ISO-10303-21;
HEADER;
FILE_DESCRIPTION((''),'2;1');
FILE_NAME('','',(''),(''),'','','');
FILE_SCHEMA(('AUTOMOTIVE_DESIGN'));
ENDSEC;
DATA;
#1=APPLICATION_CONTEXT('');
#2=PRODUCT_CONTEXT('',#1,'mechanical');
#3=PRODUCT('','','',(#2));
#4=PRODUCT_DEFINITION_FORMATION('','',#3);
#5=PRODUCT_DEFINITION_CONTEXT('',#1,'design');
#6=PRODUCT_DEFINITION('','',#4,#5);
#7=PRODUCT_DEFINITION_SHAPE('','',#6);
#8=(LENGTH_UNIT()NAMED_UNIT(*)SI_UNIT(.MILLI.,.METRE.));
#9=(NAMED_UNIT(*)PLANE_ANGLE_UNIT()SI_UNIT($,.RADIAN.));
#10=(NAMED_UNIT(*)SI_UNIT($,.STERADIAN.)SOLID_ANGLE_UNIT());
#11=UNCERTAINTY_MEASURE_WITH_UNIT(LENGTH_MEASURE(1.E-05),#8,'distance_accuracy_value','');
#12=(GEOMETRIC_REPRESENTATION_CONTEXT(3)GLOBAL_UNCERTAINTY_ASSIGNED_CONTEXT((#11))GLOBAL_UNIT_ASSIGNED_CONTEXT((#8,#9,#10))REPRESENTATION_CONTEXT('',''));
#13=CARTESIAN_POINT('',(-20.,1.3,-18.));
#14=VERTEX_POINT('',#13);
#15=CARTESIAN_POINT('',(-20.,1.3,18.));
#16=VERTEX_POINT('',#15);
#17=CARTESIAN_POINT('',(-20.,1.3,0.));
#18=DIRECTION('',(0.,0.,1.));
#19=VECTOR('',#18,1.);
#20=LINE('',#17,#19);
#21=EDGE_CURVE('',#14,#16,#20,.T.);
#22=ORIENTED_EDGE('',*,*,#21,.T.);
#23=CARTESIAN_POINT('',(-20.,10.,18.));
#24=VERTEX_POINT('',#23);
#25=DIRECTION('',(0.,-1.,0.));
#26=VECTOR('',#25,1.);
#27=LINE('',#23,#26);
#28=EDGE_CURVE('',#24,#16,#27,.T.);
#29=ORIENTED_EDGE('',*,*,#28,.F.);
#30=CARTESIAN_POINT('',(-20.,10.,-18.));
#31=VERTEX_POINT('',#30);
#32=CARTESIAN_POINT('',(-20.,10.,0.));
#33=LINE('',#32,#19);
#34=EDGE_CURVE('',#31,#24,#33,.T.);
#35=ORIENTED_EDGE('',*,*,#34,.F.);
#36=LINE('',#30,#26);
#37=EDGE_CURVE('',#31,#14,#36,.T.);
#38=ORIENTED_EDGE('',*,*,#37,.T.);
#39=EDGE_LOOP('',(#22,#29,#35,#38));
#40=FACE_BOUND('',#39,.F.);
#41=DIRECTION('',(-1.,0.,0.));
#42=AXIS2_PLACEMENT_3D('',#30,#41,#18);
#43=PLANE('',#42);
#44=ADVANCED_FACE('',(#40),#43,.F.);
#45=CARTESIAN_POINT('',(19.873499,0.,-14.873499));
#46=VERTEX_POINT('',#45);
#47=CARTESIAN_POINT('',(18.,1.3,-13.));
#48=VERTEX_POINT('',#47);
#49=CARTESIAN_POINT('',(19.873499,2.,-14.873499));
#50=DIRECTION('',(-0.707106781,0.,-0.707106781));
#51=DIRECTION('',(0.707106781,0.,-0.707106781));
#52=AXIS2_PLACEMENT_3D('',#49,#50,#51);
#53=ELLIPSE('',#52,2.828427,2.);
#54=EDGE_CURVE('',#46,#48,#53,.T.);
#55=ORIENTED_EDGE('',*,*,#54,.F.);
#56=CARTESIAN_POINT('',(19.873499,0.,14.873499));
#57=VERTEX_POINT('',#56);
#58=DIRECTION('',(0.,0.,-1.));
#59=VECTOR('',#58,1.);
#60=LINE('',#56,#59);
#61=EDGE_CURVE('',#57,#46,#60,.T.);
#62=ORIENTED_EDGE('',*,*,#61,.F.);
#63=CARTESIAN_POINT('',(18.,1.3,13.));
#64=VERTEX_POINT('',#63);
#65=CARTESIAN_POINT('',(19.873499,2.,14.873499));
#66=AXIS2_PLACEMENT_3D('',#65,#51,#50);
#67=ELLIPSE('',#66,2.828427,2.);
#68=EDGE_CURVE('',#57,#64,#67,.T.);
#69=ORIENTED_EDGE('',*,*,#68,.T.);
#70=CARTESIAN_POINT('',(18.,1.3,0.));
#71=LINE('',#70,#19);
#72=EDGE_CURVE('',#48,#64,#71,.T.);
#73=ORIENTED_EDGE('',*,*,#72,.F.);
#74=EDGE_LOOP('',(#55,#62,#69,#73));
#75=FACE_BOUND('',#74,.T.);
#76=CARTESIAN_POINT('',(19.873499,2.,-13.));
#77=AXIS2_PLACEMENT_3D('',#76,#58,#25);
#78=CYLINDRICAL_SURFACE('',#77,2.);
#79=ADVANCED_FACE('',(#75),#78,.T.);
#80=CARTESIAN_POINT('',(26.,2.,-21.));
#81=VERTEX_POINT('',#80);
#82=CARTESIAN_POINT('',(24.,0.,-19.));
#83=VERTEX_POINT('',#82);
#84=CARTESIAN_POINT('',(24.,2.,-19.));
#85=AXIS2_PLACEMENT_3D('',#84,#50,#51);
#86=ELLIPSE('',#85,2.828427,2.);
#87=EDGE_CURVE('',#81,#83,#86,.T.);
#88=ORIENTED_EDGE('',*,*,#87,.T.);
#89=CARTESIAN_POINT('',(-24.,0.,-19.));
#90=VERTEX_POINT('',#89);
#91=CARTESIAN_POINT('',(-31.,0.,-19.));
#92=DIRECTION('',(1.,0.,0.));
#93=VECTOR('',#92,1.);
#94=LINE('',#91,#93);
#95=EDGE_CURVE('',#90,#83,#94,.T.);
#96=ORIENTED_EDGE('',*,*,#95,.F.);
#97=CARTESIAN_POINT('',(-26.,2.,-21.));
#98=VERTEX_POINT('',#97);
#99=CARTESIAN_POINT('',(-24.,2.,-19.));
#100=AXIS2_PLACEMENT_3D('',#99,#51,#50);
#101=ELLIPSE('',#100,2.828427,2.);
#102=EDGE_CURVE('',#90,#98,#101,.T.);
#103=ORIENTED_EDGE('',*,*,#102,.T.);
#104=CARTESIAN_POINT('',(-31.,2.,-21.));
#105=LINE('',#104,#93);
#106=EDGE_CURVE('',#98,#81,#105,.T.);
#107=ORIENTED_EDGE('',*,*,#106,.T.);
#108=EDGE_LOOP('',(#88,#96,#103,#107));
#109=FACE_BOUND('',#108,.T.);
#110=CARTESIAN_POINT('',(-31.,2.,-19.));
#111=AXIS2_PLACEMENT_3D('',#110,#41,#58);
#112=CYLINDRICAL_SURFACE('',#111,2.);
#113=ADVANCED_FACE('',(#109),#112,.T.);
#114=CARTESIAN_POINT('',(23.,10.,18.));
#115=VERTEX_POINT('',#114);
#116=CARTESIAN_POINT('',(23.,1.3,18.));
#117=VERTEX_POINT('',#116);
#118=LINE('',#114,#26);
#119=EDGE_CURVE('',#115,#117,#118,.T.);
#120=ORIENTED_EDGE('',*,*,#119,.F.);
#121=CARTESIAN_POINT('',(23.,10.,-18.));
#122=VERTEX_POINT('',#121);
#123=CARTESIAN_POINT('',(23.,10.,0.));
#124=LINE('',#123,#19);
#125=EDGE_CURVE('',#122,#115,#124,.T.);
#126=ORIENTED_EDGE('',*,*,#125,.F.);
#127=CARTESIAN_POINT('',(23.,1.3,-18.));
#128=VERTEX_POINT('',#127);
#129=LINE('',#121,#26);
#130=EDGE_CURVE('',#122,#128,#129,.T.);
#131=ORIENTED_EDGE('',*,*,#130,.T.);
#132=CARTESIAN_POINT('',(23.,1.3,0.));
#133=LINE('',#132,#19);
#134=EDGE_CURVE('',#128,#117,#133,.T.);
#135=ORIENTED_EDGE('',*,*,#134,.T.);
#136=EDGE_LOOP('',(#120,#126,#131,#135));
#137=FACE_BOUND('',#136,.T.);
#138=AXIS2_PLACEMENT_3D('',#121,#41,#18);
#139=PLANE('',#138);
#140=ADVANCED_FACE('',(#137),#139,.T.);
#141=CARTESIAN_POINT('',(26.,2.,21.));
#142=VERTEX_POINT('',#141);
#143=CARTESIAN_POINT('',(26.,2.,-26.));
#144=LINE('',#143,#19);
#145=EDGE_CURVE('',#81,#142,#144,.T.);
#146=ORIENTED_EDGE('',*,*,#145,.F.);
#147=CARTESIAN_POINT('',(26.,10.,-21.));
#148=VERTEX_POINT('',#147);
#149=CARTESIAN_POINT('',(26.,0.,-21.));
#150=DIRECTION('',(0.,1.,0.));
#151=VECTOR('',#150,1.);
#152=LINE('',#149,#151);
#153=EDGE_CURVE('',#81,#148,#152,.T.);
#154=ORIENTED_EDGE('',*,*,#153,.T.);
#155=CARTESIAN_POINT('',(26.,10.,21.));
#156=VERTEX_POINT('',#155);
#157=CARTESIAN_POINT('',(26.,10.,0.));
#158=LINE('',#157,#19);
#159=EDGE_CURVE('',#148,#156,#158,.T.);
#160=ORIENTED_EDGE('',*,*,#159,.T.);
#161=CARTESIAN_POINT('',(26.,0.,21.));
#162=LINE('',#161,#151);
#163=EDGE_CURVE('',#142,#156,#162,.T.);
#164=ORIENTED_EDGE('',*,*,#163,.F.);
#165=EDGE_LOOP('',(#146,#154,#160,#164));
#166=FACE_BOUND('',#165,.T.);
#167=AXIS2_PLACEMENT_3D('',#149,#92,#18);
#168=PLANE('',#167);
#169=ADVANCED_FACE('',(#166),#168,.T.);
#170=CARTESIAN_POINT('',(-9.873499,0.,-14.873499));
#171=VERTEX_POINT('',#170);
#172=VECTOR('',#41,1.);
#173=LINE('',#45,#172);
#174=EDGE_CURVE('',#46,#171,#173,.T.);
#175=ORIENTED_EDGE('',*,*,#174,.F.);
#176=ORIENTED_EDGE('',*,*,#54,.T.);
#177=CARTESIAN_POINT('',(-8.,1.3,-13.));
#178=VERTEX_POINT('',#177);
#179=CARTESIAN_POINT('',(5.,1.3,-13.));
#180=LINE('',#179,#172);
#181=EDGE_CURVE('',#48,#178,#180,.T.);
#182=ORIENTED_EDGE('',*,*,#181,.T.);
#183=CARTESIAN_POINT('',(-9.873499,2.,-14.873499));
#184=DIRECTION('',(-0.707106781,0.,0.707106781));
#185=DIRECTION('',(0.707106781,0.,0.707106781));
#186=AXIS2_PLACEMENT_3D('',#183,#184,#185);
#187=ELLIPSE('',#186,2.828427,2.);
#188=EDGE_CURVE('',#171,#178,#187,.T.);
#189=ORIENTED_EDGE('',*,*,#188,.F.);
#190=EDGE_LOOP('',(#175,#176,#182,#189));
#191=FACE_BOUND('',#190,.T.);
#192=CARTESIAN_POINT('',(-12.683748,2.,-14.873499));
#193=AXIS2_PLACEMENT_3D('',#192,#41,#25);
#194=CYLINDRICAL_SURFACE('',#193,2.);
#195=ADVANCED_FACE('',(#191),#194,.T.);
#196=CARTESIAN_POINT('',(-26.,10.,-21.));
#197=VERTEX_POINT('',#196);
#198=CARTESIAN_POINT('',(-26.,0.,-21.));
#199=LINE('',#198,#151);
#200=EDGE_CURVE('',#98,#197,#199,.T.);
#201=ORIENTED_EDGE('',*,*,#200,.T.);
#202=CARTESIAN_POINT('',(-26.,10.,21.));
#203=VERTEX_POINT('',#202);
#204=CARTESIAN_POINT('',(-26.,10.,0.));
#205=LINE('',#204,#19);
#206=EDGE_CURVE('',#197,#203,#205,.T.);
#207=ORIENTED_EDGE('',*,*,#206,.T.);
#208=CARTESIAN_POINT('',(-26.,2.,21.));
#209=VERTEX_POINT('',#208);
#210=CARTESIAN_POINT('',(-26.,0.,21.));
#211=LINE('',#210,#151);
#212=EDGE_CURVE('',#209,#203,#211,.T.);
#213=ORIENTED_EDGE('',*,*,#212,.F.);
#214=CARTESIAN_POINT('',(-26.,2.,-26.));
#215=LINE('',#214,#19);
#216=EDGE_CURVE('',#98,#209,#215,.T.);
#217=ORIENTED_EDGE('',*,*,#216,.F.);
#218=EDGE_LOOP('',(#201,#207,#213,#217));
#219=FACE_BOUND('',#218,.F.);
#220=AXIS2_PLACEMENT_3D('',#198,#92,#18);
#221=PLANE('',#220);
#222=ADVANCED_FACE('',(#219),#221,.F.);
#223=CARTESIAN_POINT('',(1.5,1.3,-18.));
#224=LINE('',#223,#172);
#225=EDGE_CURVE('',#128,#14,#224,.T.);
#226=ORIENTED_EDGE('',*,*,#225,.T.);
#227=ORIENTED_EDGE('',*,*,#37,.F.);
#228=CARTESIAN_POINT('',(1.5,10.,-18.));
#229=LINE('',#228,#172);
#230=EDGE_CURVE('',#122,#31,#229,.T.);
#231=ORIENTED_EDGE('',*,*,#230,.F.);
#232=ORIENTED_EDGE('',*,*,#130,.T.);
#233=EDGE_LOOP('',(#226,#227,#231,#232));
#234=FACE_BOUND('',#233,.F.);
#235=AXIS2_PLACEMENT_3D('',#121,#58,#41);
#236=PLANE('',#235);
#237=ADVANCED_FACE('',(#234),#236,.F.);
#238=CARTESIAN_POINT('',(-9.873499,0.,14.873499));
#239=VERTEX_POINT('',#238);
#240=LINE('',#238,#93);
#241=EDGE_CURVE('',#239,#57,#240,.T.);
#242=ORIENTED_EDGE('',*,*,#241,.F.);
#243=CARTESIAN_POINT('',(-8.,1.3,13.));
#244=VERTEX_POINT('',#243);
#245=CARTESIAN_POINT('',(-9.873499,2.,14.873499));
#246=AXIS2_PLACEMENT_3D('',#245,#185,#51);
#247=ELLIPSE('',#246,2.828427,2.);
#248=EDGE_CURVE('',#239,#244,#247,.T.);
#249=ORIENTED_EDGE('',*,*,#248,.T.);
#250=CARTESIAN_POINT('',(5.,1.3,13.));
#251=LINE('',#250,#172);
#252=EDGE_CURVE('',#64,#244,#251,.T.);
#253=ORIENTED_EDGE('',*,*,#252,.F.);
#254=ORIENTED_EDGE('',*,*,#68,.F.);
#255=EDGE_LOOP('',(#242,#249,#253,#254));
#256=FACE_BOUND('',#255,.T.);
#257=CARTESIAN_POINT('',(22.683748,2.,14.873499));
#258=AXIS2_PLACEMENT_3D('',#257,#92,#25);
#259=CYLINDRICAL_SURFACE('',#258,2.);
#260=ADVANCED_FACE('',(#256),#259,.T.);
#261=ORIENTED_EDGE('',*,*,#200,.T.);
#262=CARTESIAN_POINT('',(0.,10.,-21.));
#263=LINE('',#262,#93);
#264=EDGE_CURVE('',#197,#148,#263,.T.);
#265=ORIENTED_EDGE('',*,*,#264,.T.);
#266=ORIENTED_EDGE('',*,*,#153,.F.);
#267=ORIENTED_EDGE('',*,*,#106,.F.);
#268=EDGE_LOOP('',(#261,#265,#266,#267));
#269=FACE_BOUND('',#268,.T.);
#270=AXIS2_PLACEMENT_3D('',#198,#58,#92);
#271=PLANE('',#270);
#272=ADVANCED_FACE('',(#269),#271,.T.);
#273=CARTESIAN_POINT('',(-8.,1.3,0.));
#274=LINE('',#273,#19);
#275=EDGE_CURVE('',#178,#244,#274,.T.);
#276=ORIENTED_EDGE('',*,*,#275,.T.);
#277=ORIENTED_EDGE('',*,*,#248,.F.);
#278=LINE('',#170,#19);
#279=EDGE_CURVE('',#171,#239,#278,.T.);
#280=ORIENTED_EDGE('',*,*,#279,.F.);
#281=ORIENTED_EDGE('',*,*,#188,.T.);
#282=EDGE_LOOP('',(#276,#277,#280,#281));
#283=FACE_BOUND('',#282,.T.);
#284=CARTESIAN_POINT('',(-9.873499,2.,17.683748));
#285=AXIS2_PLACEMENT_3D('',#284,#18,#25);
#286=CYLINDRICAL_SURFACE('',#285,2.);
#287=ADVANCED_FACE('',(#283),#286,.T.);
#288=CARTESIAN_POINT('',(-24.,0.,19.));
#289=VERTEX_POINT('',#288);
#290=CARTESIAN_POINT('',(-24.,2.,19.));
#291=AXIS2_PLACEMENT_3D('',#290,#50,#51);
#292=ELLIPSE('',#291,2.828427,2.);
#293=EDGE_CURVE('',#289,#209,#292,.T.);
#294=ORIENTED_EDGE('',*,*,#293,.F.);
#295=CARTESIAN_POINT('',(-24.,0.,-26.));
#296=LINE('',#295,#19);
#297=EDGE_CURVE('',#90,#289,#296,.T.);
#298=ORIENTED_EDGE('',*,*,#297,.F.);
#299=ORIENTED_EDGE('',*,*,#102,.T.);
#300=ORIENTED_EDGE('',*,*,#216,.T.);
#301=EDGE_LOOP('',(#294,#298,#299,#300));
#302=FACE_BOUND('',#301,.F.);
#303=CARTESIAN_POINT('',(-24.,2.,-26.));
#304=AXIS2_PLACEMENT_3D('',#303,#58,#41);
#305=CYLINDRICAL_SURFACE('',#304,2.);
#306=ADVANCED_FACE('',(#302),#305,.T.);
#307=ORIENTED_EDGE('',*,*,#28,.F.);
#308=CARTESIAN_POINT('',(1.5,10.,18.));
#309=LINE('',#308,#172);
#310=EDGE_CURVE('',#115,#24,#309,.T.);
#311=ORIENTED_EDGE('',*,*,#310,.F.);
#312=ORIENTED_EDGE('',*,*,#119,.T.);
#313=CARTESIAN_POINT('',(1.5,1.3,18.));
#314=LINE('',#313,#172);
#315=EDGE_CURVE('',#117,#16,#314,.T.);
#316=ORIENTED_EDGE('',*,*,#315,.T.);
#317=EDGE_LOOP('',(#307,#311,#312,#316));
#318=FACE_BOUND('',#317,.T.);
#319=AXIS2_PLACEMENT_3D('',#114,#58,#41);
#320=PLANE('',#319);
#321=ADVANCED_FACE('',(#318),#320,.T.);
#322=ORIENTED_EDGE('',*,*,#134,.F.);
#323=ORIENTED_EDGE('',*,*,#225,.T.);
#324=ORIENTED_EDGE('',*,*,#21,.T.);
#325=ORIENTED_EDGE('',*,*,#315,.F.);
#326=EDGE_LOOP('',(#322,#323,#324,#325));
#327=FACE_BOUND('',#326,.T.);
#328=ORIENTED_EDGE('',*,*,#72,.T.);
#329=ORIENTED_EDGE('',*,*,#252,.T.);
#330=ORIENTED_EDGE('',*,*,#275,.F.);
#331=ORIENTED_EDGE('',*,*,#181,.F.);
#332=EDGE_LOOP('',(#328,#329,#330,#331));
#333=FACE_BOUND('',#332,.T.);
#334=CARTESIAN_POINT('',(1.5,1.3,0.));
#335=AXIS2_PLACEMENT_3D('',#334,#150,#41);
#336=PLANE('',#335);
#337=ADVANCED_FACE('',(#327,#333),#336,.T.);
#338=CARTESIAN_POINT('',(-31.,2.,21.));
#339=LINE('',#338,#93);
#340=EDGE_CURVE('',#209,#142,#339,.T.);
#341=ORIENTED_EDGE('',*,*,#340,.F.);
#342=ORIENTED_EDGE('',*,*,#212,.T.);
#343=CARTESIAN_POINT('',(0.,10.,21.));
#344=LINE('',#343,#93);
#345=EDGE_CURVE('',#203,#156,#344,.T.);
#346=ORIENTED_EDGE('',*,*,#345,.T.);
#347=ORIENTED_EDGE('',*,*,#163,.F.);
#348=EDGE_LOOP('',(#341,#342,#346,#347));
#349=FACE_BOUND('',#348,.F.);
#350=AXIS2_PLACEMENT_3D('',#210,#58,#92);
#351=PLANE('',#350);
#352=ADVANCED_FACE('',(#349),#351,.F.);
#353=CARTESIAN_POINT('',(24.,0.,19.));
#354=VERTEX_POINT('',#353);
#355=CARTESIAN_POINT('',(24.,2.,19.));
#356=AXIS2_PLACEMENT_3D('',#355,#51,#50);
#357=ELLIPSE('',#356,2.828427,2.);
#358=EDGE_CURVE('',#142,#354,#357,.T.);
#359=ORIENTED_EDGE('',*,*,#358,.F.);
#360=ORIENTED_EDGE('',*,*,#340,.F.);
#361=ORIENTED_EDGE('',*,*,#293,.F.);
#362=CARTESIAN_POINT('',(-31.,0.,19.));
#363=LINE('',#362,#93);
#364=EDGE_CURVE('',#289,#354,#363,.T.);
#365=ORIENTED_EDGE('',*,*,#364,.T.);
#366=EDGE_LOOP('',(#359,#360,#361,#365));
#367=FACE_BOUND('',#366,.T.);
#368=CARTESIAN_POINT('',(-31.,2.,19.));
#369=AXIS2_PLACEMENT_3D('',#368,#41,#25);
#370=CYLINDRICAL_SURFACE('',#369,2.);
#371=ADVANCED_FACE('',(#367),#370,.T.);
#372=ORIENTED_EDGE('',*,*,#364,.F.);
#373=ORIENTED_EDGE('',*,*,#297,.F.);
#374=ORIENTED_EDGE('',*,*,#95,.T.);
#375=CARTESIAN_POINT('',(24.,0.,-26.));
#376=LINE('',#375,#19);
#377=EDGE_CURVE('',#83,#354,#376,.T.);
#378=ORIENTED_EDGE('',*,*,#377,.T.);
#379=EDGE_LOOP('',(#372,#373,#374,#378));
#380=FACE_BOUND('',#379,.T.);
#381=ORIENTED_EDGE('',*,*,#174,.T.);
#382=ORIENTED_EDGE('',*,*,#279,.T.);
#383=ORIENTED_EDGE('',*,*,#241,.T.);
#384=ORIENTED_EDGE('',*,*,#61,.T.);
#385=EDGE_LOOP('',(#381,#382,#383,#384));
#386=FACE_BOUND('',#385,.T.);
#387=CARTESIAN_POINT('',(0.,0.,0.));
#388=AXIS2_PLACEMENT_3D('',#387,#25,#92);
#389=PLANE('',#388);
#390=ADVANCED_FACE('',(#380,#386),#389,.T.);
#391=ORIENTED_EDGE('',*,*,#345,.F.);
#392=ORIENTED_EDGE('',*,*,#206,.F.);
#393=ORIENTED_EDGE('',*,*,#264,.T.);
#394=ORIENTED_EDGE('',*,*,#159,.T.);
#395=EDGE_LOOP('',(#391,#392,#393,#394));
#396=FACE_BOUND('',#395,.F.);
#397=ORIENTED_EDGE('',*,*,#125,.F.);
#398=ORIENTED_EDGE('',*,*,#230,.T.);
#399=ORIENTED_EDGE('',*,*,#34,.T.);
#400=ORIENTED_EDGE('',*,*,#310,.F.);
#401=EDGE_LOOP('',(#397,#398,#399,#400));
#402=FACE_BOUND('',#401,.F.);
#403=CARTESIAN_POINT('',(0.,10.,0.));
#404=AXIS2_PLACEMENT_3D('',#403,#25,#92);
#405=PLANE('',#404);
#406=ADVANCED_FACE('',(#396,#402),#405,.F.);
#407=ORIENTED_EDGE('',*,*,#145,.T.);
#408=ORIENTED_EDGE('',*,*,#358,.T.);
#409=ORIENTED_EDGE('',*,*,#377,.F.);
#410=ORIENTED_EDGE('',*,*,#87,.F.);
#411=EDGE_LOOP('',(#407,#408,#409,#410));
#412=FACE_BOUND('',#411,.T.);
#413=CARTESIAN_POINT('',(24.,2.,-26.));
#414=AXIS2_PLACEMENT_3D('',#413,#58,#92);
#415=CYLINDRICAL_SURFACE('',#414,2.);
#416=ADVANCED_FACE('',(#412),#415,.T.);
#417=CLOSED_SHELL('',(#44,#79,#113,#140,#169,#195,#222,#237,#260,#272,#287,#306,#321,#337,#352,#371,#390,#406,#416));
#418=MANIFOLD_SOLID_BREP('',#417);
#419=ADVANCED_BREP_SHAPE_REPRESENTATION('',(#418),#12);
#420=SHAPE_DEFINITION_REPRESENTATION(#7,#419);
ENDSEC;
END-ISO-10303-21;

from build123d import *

# Parameters (mm, degrees)
F0_W         = 52
F0_H         = 42
F1_DEPTH     = 10
F2_W         = 26
F2_H         = 26
F3_DEPTH     = 25
F4_W         = 43
F4_H         = 36
F4_W_2       = 26
F4_H_2       = 26
F5_DEPTH     = 8.7
F6_T1_DEPTH  = 52
F6_T3_DEPTH  = 62
F6_T5_DEPTH  = 26
F6_T7_DEPTH  = 26
F6_T13_DEPTH = 30.6837484988
F6_T17_DEPTH = 30.6837484988
F6_T24_DEPTH = 30.6837484988
F6_T28_DEPTH = 30.6837484988
F6_T35_DEPTH = 30.6837484988
F6_T39_DEPTH = 30.6837484988
F6_T46_DEPTH = 30.6837484988
F6_T50_DEPTH = 30.6837484988


# Not quite as in the source:
# - a fillet or chamfer that OpenCascade refuses, or shapes differently, is made with other operations: its cross-section is extruded or revolved along the edge and cut away or added


with BuildPart() as f1:
    # F0 (on Front) → F1 (new body)
    with BuildSketch(Plane.XZ):
        Rectangle(F0_W, F0_H)
    extrude(amount=-F1_DEPTH)

    # F2 (on face) → F3 (cut)
    with BuildSketch(Plane.XZ):
        with Locations((5, 0)):
            Rectangle(F2_W, F2_H)
    extrude(amount=-F3_DEPTH, mode=Mode.SUBTRACT)

    # F4 (on face) → F5 (cut)
    with BuildSketch(Plane(origin=(0, 10, 0), x_dir=(-1, 0, 0), z_dir=(0, 1, 0))):
        with Locations((-1.5, 0)):
            Rectangle(F4_W, F4_H)
        with Locations((-5, 0)):
            Rectangle(F4_W_2, F4_H_2, mode=Mode.SUBTRACT)
    extrude(amount=-F5_DEPTH, mode=Mode.SUBTRACT)

    # F6: fillet of radius 2 on 8 edges, made by hand

    # F6_s2 → F6_t1 (cut)
    with BuildSketch(Plane.XY.offset(-26)):
        with BuildLine():
            ThreePointArc((-26, 2), (-25.4142135624, 0.5857864376), (-24, 0))
            Line((-24, 0), (-26, 0))
            Line((-26, 0), (-26, 2))
        make_face()
        with BuildLine():
            ThreePointArc((26, 2), (25.4142135624, 0.5857864376), (24, 0))
            Line((24, 0), (26, 0))
            Line((26, 0), (26, 2))
        make_face()
    extrude(amount=F6_T1_DEPTH, mode=Mode.SUBTRACT)

    # F6_s4 → F6_t3 (cut)
    with BuildSketch(Plane.YZ.offset(-31)):
        with BuildLine():
            ThreePointArc((0, 19), (0.5857864376, 20.4142135624), (2, 21))
            Line((2, 21), (0, 21))
            Line((0, 21), (0, 19))
        make_face()
        with BuildLine():
            ThreePointArc((2, -21), (0.5857864376, -20.4142135624), (0, -19))
            Line((0, -19), (0, -21))
            Line((0, -21), (2, -21))
        make_face()
    extrude(amount=F6_T3_DEPTH, mode=Mode.SUBTRACT)

    # F6_s6 → F6_t5 (cut)
    with BuildSketch(Plane.XY.offset(-13)):
        with BuildLine():
            ThreePointArc((-9.8734993995, 0), (-8.7333239744, 0.3568323275), (-8, 1.3))
            Line((-8, 1.3), (-8, 0))
            Line((-8, 0), (-9.8734993995, 0))
        make_face()
        with BuildLine():
            ThreePointArc((19.8734993995, 0), (18.7333239744, 0.3568323275), (18, 1.3))
            Line((18, 1.3), (18, 0))
            Line((18, 0), (19.8734993995, 0))
        make_face()
    extrude(amount=F6_T5_DEPTH, mode=Mode.SUBTRACT)

    # F6_s8 → F6_t7 (cut)
    with BuildSketch(Plane.YZ.offset(-8)):
        with BuildLine():
            ThreePointArc((0, -14.8734993995), (0.3568323275, -13.7333239744), (1.3, -13))
            Line((1.3, -13), (0, -13))
            Line((0, -13), (0, -14.8734993995))
        make_face()
        with BuildLine():
            ThreePointArc((0, 14.8734993995), (0.3568323275, 13.7333239744), (1.3, 13))
            Line((1.3, 13), (0, 13))
            Line((0, 13), (0, 14.8734993995))
        make_face()
    extrude(amount=F6_T7_DEPTH, mode=Mode.SUBTRACT)


with BuildPart() as f6_tool11:
    # F6_s12 → F6_t13 (new body)
    with BuildSketch(Plane.YZ.offset(18)):
        with BuildLine():
            ThreePointArc((0, 14.8734993995), (0.3568323275, 13.7333239744), (1.3, 13))
            Line((1.3, 13), (0, 13))
            Line((0, 13), (0, 14.8734993995))
        make_face()
    extrude(amount=-F6_T13_DEPTH)

    split(bisect_by=Plane.YZ.offset(-8), keep=Keep.BOTTOM)


with BuildPart() as f6_tool15:
    # F6_s16 → F6_t17 (new body)
    with BuildSketch(Plane.XY.offset(17.6837484988)):
        with BuildLine():
            ThreePointArc((-9.8734993995, 0), (-8.7333239744, 0.3568323275), (-8, 1.3))
            Line((-8, 1.3), (-8, 0))
            Line((-8, 0), (-9.8734993995, 0))
        make_face()
    extrude(amount=-F6_T17_DEPTH)

    split(bisect_by=Plane.XY.offset(13), keep=Keep.TOP)


with BuildPart() as f6_tool11_1:
    add(f6_tool11.part)

    # F6_t19: intersect F6_tool15
    add(f6_tool15.part, mode=Mode.INTERSECT)


with BuildPart() as f1_1:
    add(f1.part)

    # F6_t9: cut F6_tool11
    add(f6_tool11_1.part, mode=Mode.SUBTRACT)


with BuildPart() as f6_tool22:
    # F6_s23 → F6_t24 (new body)
    with BuildSketch(Plane.XY.offset(13)):
        with BuildLine():
            ThreePointArc((-9.8734993995, 0), (-8.7333239744, 0.3568323275), (-8, 1.3))
            Line((-8, 1.3), (-8, 0))
            Line((-8, 0), (-9.8734993995, 0))
        make_face()
    extrude(amount=-F6_T24_DEPTH)

    split(bisect_by=Plane.XY.offset(-13), keep=Keep.BOTTOM)


with BuildPart() as f6_tool26:
    # F6_s27 → F6_t28 (new body)
    with BuildSketch(Plane.YZ.offset(-12.6837484988)):
        with BuildLine():
            ThreePointArc((0, -14.8734993995), (0.3568323275, -13.7333239744), (1.3, -13))
            Line((1.3, -13), (0, -13))
            Line((0, -13), (0, -14.8734993995))
        make_face()
    extrude(amount=F6_T28_DEPTH)

    split(bisect_by=Plane.YZ.offset(-8), keep=Keep.BOTTOM)


with BuildPart() as f6_tool22_1:
    add(f6_tool22.part)

    # F6_t30: intersect F6_tool26
    add(f6_tool26.part, mode=Mode.INTERSECT)


with BuildPart() as f1_2:
    add(f1_1.part)

    # F6_t20: cut F6_tool22
    add(f6_tool22_1.part, mode=Mode.SUBTRACT)


with BuildPart() as f6_tool33:
    # F6_s34 → F6_t35 (new body)
    with BuildSketch(Plane.XY.offset(-17.6837484988)):
        with BuildLine():
            ThreePointArc((19.8734993995, 0), (18.7333239744, 0.3568323275), (18, 1.3))
            Line((18, 1.3), (18, 0))
            Line((18, 0), (19.8734993995, 0))
        make_face()
    extrude(amount=F6_T35_DEPTH)

    split(bisect_by=Plane.XY.offset(-13), keep=Keep.BOTTOM)


with BuildPart() as f6_tool37:
    # F6_s38 → F6_t39 (new body)
    with BuildSketch(Plane.YZ.offset(-8)):
        with BuildLine():
            ThreePointArc((0, -14.8734993995), (0.3568323275, -13.7333239744), (1.3, -13))
            Line((1.3, -13), (0, -13))
            Line((0, -13), (0, -14.8734993995))
        make_face()
    extrude(amount=F6_T39_DEPTH)

    split(bisect_by=Plane.YZ.offset(18), keep=Keep.TOP)


with BuildPart() as f6_tool33_1:
    add(f6_tool33.part)

    # F6_t41: intersect F6_tool37
    add(f6_tool37.part, mode=Mode.INTERSECT)


with BuildPart() as f1_3:
    add(f1_2.part)

    # F6_t31: cut F6_tool33
    add(f6_tool33_1.part, mode=Mode.SUBTRACT)


with BuildPart() as f6_tool44:
    # F6_s45 → F6_t46 (new body)
    with BuildSketch(Plane.XY.offset(-13)):
        with BuildLine():
            ThreePointArc((19.8734993995, 0), (18.7333239744, 0.3568323275), (18, 1.3))
            Line((18, 1.3), (18, 0))
            Line((18, 0), (19.8734993995, 0))
        make_face()
    extrude(amount=F6_T46_DEPTH)

    split(bisect_by=Plane.XY.offset(13), keep=Keep.TOP)


with BuildPart() as f6_tool48:
    # F6_s49 → F6_t50 (new body)
    with BuildSketch(Plane.YZ.offset(22.6837484988)):
        with BuildLine():
            ThreePointArc((0, 14.8734993995), (0.3568323275, 13.7333239744), (1.3, 13))
            Line((1.3, 13), (0, 13))
            Line((0, 13), (0, 14.8734993995))
        make_face()
    extrude(amount=-F6_T50_DEPTH)

    split(bisect_by=Plane.YZ.offset(18), keep=Keep.TOP)


with BuildPart() as f6_tool44_1:
    add(f6_tool44.part)

    # F6_t52: intersect F6_tool48
    add(f6_tool48.part, mode=Mode.INTERSECT)


with BuildPart() as f1_4:
    add(f1_3.part)

    # F6_t42: cut F6_tool44
    add(f6_tool44_1.part, mode=Mode.SUBTRACT)


solid = f1_4.part
